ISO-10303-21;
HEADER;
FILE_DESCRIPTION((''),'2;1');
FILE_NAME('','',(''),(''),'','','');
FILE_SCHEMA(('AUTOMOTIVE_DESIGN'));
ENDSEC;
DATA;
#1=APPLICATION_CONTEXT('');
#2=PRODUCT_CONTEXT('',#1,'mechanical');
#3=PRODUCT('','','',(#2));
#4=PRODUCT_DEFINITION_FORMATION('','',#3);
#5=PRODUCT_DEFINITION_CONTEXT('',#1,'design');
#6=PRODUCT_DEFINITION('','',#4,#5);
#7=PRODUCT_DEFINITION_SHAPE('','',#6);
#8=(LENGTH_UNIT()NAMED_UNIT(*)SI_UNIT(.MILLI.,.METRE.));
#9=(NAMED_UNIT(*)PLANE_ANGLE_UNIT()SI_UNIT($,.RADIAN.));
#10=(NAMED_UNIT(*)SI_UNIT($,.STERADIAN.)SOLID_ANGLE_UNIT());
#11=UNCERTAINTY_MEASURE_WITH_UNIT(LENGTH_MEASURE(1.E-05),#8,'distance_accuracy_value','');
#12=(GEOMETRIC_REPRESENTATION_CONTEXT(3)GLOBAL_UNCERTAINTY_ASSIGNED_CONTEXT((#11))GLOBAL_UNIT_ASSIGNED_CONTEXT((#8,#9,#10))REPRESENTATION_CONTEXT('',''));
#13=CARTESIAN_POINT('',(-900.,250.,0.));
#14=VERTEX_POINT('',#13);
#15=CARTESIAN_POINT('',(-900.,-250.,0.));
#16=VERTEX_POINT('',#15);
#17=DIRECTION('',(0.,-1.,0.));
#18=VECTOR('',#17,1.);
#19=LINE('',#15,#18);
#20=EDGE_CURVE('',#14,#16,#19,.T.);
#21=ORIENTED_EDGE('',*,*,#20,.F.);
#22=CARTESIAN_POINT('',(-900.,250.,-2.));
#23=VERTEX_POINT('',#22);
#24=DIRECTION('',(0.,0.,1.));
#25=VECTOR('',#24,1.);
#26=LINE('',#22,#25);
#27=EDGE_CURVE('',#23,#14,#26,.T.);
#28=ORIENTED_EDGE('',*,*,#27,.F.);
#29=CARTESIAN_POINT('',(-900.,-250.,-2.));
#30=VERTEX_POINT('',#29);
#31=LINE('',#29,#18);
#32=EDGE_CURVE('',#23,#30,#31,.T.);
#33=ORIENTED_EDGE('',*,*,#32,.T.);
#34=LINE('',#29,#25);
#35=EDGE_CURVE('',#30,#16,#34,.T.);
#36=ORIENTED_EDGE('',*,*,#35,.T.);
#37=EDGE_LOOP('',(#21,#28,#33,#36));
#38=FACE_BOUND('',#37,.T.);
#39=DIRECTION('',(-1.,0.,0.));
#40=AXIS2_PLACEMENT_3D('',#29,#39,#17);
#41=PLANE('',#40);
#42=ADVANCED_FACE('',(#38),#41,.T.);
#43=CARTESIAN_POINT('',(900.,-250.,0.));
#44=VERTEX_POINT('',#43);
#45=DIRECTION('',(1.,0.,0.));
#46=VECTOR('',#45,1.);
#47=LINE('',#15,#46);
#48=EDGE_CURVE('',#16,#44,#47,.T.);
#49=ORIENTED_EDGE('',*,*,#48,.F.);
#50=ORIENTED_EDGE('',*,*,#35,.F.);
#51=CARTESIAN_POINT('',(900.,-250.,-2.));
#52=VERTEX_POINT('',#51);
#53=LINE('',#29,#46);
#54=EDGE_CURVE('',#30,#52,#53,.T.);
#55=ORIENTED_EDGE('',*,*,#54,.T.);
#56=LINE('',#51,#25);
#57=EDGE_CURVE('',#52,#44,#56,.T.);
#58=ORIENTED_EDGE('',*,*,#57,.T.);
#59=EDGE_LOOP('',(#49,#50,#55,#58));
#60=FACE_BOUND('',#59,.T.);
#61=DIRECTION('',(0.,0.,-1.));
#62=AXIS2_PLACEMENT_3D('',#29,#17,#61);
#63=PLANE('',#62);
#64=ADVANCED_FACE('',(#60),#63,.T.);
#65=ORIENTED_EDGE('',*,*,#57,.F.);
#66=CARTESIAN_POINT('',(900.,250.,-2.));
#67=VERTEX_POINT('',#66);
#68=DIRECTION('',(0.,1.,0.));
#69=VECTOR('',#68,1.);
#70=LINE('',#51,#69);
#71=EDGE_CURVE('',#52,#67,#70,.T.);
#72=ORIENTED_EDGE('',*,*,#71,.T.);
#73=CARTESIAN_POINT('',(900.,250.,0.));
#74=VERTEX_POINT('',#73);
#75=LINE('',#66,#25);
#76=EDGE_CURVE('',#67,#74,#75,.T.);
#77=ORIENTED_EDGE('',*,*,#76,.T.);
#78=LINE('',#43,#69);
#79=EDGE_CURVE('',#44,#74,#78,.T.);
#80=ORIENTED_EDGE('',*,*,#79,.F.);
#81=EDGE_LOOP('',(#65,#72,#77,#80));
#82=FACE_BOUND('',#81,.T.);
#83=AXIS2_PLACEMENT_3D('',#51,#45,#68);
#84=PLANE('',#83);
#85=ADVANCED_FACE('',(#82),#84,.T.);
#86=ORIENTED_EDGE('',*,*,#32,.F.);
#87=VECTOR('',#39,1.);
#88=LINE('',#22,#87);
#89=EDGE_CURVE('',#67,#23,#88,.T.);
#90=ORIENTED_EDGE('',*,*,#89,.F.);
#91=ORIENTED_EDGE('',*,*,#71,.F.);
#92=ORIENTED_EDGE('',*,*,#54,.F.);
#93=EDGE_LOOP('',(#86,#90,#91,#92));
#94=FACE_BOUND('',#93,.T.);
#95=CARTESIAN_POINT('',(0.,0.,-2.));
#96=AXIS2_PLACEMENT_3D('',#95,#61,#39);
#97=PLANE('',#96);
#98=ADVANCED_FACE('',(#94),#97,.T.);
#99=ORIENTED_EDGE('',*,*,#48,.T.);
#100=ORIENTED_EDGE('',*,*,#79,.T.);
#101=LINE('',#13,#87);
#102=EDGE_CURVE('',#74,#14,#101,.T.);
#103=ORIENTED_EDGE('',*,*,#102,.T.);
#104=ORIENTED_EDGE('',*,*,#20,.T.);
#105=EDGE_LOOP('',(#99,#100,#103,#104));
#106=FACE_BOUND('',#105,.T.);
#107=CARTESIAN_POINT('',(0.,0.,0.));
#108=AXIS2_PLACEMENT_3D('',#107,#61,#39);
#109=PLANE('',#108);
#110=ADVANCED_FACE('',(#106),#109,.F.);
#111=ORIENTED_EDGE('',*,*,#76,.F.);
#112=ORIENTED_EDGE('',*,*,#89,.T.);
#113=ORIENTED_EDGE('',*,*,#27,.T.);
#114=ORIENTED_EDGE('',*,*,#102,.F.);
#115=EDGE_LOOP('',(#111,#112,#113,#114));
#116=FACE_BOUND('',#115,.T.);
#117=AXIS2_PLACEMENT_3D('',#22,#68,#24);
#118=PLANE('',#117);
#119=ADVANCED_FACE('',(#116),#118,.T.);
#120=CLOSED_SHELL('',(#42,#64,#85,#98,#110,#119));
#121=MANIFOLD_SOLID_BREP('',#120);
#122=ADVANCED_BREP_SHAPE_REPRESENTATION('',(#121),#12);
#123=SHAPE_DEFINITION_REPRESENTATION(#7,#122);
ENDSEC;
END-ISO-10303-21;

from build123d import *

# Parameters (mm, degrees)
SKETCH1_W          = 1800
SKETCH1_H          = 500
BASE_FLANGE1_DEPTH = 2


# Sheet-metal steps are written as plain solids
with BuildPart() as part:
    # Sketch1 → Base-Flange1 (new body)
    with BuildSketch(Plane.XY):
        Rectangle(SKETCH1_W, SKETCH1_H)
    extrude(amount=-BASE_FLANGE1_DEPTH)


solid = part.part
